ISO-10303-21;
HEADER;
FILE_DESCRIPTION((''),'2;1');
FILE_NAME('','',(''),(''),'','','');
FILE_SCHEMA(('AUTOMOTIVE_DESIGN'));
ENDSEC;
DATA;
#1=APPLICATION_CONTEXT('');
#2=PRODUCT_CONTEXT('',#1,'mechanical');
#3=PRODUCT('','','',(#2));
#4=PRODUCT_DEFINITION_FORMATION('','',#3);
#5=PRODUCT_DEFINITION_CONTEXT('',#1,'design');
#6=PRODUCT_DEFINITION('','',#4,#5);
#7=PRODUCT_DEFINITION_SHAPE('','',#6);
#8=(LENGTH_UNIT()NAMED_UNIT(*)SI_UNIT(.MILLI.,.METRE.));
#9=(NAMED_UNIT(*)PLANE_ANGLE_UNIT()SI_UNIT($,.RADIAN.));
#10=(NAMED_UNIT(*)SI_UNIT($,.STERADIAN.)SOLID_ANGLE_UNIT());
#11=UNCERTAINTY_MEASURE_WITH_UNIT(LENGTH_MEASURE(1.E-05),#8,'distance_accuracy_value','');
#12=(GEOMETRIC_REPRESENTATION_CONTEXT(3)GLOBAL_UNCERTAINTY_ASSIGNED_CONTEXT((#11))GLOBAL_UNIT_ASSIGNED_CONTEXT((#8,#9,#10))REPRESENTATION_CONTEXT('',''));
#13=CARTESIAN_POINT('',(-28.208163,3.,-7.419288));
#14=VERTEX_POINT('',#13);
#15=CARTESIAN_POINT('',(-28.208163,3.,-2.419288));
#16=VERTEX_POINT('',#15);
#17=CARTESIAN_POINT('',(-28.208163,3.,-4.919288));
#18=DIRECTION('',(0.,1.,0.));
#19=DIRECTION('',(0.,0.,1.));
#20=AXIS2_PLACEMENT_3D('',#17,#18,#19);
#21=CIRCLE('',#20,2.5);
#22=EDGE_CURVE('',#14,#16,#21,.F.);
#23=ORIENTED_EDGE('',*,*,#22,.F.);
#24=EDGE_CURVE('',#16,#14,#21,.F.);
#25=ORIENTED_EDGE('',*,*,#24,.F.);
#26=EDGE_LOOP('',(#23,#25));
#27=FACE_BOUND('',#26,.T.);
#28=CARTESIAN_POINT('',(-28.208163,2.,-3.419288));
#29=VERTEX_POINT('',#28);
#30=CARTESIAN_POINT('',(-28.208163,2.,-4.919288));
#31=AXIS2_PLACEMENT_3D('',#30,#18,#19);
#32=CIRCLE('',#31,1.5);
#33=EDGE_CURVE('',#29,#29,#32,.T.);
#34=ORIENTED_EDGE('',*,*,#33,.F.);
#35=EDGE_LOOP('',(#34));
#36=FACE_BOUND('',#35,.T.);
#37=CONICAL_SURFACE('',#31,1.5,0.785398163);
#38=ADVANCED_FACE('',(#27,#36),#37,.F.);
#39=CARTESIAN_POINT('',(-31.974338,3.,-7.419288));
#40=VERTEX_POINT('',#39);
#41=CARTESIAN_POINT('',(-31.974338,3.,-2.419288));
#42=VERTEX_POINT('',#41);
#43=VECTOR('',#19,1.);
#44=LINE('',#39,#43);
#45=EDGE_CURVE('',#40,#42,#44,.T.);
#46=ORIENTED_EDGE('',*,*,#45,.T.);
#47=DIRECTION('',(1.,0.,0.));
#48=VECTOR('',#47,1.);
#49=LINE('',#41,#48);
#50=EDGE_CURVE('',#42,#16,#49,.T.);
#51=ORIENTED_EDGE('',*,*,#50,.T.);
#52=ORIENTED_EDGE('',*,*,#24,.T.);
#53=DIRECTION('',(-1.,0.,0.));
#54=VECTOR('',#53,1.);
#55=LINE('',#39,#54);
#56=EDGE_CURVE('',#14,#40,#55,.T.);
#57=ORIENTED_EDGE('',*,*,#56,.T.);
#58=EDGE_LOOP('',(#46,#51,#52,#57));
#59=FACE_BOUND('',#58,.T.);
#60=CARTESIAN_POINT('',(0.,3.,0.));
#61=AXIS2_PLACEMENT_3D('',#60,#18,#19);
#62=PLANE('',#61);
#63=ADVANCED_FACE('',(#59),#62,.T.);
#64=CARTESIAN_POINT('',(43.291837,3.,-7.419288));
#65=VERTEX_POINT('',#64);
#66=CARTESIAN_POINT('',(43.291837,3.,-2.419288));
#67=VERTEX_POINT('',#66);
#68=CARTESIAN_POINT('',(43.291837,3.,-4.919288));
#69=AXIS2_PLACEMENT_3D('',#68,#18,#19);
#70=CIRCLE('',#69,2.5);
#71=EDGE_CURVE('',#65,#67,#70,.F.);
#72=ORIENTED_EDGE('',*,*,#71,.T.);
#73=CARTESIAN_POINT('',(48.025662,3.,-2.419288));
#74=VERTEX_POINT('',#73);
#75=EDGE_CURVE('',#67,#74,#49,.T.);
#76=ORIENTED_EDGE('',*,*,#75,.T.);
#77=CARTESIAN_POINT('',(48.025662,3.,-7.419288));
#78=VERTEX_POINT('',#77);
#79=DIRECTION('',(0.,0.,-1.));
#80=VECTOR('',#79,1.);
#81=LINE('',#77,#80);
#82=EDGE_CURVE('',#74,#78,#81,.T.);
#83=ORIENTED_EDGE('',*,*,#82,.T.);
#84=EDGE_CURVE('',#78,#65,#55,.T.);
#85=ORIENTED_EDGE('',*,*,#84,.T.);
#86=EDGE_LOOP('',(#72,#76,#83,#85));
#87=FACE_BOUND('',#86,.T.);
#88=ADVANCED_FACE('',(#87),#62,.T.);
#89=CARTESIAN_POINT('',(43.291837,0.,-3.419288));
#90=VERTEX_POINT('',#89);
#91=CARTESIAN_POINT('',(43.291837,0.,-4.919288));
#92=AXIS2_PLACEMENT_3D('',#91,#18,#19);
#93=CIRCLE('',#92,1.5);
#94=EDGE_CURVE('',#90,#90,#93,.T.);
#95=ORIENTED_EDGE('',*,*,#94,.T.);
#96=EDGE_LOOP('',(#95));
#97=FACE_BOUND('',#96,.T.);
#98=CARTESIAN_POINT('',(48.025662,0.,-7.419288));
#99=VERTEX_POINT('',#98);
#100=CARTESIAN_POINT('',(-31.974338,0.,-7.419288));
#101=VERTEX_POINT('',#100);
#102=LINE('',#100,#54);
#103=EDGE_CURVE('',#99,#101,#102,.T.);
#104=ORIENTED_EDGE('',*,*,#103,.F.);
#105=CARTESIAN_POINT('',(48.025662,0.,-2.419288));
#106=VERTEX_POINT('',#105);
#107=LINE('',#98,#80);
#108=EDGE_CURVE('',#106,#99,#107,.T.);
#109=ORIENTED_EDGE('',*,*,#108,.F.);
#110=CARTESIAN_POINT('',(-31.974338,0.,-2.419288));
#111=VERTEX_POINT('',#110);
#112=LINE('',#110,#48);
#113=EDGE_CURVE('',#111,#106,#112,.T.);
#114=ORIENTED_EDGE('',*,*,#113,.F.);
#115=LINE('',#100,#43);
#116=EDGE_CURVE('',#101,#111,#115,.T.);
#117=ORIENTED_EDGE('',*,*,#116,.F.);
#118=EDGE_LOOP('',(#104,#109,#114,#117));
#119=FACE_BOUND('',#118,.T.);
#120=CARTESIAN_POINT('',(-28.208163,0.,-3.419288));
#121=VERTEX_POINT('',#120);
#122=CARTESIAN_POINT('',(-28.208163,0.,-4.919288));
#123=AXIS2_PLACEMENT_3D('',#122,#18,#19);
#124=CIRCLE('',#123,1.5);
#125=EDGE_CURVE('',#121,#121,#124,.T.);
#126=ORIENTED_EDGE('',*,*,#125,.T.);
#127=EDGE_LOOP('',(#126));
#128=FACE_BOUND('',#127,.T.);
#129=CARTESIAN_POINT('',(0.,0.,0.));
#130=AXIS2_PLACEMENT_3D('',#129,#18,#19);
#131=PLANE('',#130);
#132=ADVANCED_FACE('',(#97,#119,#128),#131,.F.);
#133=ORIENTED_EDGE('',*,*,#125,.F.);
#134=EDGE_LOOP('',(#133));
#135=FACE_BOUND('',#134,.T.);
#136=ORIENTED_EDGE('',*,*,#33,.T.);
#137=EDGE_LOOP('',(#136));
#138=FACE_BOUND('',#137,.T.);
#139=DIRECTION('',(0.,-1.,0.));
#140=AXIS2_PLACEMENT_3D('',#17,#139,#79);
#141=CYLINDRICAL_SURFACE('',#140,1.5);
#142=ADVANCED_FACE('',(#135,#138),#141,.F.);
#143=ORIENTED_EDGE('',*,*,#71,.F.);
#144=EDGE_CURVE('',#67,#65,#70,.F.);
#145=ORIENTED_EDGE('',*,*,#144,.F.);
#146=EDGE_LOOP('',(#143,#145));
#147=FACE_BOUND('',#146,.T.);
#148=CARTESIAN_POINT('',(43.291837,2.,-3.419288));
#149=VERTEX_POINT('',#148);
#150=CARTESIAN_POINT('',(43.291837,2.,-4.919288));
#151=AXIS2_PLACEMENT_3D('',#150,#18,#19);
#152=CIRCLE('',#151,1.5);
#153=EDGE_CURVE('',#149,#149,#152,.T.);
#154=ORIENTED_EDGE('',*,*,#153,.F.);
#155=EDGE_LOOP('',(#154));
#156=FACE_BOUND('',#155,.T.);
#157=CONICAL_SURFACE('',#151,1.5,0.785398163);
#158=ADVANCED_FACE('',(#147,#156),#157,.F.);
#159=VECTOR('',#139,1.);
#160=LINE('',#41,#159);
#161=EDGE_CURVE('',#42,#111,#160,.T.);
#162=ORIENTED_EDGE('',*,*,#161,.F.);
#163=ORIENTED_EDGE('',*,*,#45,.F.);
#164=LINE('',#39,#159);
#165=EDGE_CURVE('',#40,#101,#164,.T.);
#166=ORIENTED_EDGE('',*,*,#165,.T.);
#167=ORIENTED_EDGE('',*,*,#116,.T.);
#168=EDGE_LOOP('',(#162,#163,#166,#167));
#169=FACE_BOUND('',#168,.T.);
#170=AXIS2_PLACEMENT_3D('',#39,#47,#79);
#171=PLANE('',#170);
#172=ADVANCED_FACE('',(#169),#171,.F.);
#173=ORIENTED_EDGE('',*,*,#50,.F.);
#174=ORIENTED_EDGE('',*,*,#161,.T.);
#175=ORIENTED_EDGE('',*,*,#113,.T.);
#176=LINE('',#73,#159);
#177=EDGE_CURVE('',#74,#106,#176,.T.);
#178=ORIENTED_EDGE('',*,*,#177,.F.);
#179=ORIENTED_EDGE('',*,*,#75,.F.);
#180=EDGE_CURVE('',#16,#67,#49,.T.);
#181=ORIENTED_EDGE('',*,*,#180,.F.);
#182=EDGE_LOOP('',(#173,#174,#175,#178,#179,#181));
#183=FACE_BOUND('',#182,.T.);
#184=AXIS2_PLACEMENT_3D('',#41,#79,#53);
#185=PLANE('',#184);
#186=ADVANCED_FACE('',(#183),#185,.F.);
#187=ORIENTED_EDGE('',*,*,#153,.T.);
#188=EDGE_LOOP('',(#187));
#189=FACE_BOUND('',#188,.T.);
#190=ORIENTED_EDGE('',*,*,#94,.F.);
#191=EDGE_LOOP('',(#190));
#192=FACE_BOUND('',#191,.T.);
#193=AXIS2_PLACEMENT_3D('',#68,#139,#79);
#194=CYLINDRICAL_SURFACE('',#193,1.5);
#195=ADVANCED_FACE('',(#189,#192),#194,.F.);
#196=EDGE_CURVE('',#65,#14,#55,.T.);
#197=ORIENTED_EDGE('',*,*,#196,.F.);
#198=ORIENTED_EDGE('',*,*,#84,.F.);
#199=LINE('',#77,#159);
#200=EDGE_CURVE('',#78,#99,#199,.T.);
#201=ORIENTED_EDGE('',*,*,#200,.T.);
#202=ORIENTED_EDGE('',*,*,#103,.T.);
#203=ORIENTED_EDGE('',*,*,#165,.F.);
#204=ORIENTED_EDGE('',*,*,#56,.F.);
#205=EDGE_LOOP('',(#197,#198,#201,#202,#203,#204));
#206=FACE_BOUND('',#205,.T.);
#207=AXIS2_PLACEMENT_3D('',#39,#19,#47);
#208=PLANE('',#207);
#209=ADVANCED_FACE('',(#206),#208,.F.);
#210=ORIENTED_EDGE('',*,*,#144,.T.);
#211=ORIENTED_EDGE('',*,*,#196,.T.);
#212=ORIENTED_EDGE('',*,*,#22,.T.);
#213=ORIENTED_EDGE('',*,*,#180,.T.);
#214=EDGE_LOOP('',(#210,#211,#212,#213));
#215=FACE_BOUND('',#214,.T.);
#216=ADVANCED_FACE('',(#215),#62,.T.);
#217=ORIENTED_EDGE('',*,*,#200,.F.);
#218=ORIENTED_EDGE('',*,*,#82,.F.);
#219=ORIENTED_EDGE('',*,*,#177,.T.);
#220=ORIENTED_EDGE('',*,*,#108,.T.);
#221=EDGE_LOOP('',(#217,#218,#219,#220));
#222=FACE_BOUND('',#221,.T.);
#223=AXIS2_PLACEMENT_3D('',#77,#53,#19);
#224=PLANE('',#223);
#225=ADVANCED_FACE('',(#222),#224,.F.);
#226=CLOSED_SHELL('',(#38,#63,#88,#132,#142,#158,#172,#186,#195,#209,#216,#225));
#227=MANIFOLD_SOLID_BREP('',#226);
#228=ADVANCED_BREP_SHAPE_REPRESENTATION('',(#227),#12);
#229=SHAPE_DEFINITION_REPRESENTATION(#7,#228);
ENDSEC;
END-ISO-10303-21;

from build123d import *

# Parameters (mm, degrees)
SKETCH1_W           = 80
SKETCH1_H           = 5
SKETCH1_R           = 1.5
BOSS_EXTRUDE1_DEPTH = 3
CHAMFER1_SIZE       = 1


with BuildPart() as part:
    # Sketch1 → Boss-Extrude1 (new body)
    with BuildSketch(Plane(origin=(0, 0, 0), x_dir=(1, 0, 0), z_dir=(0, 1, 0))):
        with Locations((8.025662252, 4.919288079)):
            Rectangle(SKETCH1_W, SKETCH1_H)
        with Locations(Location((-28.208163206, 4.919288079, 0), (0, 0, 270))):
            Circle(SKETCH1_R, mode=Mode.SUBTRACT)
        with Locations(Location((43.291836794, 4.919288079, 0), (0, 0, 270))):
            Circle(SKETCH1_R, mode=Mode.SUBTRACT)
    extrude(amount=BOSS_EXTRUDE1_DEPTH)

    # Chamfer1
    chamfer1_edges = [part.edges().sort_by_distance(p)[0] for p in [
        (-28.208163206, 3, -6.419288079),
        (43.291836794, 3, -6.419288079),
    ]]
    chamfer(chamfer1_edges, length=CHAMFER1_SIZE - 0.0001)  # a hair under: the kernel refuses the full size


solid = part.part
